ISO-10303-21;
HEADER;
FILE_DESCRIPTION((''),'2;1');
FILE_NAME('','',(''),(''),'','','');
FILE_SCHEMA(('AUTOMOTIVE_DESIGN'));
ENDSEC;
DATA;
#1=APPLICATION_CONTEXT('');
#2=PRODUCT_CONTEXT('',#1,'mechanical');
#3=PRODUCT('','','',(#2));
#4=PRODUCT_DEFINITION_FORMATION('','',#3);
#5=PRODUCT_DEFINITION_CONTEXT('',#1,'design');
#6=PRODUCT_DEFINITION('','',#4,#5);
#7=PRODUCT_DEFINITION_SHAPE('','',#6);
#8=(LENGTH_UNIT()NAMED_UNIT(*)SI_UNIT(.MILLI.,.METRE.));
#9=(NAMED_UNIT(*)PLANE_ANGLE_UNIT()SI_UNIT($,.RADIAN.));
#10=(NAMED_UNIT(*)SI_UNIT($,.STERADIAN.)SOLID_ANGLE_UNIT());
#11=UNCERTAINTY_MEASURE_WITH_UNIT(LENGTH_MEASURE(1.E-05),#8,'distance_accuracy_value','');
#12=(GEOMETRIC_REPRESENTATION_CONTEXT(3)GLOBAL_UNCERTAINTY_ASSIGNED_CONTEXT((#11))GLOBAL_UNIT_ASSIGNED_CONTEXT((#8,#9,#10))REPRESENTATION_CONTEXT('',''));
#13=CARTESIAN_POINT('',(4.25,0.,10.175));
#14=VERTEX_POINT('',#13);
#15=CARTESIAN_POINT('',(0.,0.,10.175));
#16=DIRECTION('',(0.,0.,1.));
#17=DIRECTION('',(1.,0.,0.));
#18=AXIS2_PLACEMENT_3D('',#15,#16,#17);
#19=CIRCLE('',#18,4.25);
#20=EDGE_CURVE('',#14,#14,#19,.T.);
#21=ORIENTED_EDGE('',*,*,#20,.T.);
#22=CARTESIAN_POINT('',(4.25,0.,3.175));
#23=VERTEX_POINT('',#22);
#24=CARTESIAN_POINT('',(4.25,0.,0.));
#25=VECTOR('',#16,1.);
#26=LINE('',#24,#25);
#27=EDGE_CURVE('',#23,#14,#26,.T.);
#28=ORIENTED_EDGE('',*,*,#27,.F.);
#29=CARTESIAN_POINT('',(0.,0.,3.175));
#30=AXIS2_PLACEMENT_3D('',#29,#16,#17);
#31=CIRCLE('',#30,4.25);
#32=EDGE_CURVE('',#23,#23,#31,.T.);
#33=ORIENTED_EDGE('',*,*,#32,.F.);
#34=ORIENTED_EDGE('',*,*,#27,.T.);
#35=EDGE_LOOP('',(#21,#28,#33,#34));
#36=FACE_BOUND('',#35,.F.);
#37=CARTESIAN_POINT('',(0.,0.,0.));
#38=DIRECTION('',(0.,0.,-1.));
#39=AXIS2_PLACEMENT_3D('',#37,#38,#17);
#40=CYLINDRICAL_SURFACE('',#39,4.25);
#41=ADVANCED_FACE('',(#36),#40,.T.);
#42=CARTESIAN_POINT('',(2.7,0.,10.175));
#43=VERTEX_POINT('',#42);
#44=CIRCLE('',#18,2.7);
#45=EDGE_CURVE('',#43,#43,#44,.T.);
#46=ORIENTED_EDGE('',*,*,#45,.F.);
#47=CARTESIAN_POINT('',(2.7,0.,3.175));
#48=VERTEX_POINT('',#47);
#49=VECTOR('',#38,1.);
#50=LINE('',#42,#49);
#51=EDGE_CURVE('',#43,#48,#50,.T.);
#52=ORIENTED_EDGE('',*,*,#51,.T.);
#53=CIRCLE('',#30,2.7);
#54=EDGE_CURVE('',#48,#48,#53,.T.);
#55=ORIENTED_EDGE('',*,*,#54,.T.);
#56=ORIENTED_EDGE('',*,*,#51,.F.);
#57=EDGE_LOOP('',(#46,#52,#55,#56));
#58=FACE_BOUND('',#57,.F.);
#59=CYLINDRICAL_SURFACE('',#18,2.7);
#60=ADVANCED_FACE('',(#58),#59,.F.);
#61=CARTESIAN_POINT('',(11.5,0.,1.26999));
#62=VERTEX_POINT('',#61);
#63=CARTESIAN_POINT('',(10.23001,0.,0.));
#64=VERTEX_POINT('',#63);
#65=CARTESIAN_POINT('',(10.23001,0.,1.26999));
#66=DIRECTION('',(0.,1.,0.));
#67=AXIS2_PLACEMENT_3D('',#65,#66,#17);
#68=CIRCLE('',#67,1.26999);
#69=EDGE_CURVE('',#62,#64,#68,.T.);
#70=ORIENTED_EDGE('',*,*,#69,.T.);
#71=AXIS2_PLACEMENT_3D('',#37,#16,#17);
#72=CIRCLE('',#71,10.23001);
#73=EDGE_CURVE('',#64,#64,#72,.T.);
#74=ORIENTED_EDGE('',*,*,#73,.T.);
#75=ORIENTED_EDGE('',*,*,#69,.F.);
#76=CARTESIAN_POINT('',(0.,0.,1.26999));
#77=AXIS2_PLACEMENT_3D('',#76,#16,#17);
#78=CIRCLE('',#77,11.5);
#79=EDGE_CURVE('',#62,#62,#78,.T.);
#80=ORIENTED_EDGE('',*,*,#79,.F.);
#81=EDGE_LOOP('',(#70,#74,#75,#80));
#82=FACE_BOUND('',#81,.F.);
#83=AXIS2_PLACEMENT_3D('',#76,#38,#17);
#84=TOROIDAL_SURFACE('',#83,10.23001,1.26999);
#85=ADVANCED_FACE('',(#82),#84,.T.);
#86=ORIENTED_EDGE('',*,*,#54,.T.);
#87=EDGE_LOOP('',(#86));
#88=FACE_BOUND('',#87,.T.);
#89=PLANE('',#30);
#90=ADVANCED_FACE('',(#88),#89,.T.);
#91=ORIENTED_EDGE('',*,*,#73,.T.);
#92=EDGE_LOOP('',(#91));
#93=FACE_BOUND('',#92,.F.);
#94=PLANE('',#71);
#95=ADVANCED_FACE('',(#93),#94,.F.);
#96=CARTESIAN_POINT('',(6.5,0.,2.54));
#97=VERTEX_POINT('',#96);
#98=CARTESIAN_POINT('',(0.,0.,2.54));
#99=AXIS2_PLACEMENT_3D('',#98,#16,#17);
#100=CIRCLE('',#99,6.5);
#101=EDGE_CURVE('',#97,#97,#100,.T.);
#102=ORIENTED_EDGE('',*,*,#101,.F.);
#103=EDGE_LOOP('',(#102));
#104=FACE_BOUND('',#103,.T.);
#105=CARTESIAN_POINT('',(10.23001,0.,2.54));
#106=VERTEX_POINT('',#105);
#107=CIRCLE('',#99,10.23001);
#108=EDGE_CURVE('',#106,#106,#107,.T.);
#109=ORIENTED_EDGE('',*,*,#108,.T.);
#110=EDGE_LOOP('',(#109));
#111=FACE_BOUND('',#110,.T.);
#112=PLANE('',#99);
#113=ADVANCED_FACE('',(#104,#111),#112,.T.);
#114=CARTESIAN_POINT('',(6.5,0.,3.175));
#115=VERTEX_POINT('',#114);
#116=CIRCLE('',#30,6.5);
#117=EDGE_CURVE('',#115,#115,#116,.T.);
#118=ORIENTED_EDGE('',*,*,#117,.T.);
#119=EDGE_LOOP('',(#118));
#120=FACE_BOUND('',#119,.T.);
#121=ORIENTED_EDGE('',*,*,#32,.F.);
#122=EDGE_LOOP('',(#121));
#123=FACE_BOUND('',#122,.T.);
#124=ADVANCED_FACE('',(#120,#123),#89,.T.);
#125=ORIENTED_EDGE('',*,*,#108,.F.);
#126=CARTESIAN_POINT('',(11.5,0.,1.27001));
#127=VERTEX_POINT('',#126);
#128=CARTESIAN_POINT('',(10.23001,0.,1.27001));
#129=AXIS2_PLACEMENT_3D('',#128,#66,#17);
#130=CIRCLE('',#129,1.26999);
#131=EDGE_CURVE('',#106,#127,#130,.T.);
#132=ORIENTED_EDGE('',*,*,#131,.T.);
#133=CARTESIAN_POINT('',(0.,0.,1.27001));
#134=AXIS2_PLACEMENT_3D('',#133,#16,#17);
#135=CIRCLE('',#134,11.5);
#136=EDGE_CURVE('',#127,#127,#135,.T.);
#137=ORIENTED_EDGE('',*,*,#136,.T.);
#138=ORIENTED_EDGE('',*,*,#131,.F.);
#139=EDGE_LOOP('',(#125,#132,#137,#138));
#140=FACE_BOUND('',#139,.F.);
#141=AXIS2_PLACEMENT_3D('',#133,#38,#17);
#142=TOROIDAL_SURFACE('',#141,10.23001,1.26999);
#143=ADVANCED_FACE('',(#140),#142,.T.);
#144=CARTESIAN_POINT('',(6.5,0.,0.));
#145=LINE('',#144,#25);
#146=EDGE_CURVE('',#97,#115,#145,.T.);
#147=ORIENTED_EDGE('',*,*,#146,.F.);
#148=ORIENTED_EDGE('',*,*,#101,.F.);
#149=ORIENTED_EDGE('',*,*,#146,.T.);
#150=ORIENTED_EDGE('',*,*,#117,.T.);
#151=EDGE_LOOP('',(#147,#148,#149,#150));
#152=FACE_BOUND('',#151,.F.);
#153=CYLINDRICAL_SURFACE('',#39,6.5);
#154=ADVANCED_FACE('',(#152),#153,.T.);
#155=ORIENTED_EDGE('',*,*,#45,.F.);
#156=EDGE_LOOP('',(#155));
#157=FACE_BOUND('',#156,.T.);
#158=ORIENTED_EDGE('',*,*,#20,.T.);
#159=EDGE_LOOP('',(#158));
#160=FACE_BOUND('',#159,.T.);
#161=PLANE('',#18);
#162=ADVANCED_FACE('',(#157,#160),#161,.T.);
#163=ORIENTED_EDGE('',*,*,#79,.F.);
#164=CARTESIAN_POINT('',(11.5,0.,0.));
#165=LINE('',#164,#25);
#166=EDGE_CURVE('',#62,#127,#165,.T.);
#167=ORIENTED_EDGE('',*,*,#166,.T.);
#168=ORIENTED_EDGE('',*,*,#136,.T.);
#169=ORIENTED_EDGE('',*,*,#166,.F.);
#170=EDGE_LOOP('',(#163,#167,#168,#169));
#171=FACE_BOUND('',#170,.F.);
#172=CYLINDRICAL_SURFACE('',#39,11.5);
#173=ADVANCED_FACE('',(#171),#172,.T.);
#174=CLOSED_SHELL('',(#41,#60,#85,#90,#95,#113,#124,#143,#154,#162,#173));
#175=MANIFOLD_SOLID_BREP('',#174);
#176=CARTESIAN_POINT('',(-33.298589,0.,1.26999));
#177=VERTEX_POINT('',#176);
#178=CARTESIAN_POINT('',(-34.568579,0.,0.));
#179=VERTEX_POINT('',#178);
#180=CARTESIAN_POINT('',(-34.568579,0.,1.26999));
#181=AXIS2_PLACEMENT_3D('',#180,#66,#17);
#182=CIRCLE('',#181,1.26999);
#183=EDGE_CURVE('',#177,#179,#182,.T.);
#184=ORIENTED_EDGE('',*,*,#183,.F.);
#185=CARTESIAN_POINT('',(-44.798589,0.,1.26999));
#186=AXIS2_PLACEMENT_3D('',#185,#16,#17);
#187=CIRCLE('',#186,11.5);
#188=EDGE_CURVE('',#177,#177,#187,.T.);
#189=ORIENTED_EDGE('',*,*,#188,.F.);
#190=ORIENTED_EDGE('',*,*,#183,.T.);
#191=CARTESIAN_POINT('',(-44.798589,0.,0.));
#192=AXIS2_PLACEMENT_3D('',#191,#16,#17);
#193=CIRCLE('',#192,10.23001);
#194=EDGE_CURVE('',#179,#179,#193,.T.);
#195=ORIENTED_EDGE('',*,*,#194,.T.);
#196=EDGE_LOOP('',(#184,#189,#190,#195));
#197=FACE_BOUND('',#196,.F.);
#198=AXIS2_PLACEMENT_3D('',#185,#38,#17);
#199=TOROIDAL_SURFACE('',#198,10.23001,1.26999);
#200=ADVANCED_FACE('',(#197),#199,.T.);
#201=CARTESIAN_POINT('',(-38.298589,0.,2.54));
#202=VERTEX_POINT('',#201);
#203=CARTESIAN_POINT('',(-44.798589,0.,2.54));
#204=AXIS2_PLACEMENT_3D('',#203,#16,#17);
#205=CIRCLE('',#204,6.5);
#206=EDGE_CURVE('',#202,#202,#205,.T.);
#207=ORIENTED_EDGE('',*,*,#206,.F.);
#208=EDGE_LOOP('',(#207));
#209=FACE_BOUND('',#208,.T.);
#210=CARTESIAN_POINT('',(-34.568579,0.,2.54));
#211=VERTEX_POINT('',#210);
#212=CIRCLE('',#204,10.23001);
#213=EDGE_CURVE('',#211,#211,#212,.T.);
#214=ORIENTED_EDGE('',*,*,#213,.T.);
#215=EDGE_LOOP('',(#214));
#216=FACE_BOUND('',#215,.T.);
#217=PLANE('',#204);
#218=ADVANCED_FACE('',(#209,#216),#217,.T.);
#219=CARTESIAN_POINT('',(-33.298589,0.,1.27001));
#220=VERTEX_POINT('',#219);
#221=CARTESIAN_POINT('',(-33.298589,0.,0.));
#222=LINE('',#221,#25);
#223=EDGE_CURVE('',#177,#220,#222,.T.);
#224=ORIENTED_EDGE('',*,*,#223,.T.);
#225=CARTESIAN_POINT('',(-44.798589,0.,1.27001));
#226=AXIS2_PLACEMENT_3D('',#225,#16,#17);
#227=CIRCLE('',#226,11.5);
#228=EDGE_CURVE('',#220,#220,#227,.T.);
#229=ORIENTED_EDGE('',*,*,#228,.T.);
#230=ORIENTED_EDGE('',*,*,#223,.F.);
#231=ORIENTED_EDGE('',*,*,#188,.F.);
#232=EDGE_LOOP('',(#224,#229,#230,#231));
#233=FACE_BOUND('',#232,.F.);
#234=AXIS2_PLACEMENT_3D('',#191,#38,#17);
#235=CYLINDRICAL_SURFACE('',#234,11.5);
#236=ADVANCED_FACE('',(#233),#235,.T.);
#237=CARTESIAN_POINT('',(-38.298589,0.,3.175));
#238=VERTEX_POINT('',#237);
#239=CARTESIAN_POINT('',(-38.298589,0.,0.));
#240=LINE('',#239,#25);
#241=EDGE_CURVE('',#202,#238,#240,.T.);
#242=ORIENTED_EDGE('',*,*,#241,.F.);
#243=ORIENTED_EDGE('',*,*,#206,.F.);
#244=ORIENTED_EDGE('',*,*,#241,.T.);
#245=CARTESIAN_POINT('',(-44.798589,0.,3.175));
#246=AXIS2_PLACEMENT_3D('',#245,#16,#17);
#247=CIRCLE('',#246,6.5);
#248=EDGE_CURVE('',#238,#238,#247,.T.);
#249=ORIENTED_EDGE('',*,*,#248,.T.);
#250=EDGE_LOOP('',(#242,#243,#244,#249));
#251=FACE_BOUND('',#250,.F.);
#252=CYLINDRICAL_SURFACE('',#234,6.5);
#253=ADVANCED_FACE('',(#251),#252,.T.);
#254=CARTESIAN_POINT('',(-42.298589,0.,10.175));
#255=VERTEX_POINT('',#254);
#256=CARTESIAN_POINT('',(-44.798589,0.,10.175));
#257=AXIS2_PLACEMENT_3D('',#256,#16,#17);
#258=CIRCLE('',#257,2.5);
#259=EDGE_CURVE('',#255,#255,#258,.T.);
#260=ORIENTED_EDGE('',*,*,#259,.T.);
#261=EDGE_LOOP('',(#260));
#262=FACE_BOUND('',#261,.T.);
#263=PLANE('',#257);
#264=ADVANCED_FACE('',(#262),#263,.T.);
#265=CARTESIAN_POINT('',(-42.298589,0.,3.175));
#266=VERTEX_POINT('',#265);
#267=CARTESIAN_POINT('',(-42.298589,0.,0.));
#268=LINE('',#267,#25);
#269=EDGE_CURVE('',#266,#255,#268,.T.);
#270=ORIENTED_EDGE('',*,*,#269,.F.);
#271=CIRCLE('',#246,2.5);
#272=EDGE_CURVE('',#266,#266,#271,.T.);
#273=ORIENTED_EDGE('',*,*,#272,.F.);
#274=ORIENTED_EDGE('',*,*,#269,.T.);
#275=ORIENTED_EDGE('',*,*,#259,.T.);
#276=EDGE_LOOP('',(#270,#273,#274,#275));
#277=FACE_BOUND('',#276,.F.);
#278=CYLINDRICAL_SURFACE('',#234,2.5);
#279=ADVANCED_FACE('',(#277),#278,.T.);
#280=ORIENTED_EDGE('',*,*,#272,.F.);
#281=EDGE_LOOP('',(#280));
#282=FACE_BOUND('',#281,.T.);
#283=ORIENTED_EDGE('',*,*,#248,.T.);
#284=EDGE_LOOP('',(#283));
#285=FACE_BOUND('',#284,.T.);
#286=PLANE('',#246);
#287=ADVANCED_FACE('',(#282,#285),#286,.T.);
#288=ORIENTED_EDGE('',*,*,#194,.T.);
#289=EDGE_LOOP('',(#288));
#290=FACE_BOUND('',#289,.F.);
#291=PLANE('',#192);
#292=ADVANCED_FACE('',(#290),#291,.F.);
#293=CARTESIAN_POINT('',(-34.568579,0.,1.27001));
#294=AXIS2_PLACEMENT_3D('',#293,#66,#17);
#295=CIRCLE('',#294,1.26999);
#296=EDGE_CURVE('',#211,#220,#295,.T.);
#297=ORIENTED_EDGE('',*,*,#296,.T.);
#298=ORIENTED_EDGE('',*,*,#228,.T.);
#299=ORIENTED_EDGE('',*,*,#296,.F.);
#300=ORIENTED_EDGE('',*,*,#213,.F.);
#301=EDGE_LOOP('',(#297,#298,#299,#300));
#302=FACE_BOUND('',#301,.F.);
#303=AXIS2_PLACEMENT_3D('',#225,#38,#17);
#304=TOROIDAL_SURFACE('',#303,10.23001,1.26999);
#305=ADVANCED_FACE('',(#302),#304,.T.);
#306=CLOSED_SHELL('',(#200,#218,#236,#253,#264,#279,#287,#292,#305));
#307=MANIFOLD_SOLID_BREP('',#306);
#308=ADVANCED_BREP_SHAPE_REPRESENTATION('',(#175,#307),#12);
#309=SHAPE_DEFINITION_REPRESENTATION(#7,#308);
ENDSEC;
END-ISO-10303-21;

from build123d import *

# Parameters (mm, degrees)
F0_R      = 11.5
F0_R_2    = 6.5
F1_DEPTH  = 2.54
F0_R_3    = 4.25
F2_DEPTH  = 3.175
F3_DEPTH  = 10.175
F4_R      = 1.26999
F5_R      = 11.5
F5_R_2    = 6.5
F6_DEPTH  = 2.54
F5_R_3    = 2.5
F7_DEPTH  = 3.175
F8_DEPTH  = 10.175
F9_R      = 2.7
F10_DEPTH = 7
F11_R     = 1.26999


# Not quite as in the source:
# - a fillet or chamfer is up to 0.001 mm smaller than in the source, because OpenCascade refuses the exact size


with BuildPart() as f1:
    # F0 (on Top) → F1 (new body)
    with BuildSketch(Plane.XY):
        Circle(F0_R)
        Circle(F0_R_2, mode=Mode.SUBTRACT)
    extrude(amount=F1_DEPTH)

    # F0 (on Top) → F2 (join)
    with BuildSketch(Plane.XY):
        Circle(F0_R_2)
        Circle(F0_R_3, mode=Mode.SUBTRACT)
    extrude(amount=F2_DEPTH)

    # F0 (on Top) → F3 (join)
    with BuildSketch(Plane.XY):
        Circle(F0_R_3)
    extrude(amount=F3_DEPTH)

    # F4 (radius 1.27 in the source; OpenCascade refuses exactly that, so slightly less here)
    f4_edges = [f1.edges().sort_by_distance(p)[0] for p in [
        (-11.5, 0, 2.54),
        (-11.5, 0, 0),
    ]]
    fillet(f4_edges, radius=F4_R)

    # F9 (on face) → F10 (cut)
    with BuildSketch(Plane.XY.offset(10.175)):
        Circle(F9_R)
    extrude(amount=-F10_DEPTH, mode=Mode.SUBTRACT)


with BuildPart() as f6:
    # F5 (on Top) → F6 (new body)
    with BuildSketch(Plane.XY):
        with Locations((-44.7985892718, 0)):
            Circle(F5_R)
        with Locations((-44.7985892718, 0)):
            Circle(F5_R_2, mode=Mode.SUBTRACT)
    extrude(amount=F6_DEPTH)

    # F5 (on Top) → F7 (join)
    with BuildSketch(Plane.XY):
        with Locations((-44.7985892718, 0)):
            Circle(F5_R_2)
        with Locations((-44.7985892718, 0)):
            Circle(F5_R_3, mode=Mode.SUBTRACT)
    extrude(amount=F7_DEPTH)

    # F5 (on Top) → F8 (join)
    with BuildSketch(Plane.XY):
        with Locations((-44.7985892718, 0)):
            Circle(F5_R_3)
    extrude(amount=F8_DEPTH)

    # F11 (radius 1.27 in the source; OpenCascade refuses exactly that, so slightly less here)
    f11_edges = [f6.edges().sort_by_distance(p)[0] for p in [
        (-56.298589, 0, 2.54),
        (-56.298589, 0, 0),
    ]]
    fillet(f11_edges, radius=F11_R)


solid = Compound([f1.part, f6.part])
